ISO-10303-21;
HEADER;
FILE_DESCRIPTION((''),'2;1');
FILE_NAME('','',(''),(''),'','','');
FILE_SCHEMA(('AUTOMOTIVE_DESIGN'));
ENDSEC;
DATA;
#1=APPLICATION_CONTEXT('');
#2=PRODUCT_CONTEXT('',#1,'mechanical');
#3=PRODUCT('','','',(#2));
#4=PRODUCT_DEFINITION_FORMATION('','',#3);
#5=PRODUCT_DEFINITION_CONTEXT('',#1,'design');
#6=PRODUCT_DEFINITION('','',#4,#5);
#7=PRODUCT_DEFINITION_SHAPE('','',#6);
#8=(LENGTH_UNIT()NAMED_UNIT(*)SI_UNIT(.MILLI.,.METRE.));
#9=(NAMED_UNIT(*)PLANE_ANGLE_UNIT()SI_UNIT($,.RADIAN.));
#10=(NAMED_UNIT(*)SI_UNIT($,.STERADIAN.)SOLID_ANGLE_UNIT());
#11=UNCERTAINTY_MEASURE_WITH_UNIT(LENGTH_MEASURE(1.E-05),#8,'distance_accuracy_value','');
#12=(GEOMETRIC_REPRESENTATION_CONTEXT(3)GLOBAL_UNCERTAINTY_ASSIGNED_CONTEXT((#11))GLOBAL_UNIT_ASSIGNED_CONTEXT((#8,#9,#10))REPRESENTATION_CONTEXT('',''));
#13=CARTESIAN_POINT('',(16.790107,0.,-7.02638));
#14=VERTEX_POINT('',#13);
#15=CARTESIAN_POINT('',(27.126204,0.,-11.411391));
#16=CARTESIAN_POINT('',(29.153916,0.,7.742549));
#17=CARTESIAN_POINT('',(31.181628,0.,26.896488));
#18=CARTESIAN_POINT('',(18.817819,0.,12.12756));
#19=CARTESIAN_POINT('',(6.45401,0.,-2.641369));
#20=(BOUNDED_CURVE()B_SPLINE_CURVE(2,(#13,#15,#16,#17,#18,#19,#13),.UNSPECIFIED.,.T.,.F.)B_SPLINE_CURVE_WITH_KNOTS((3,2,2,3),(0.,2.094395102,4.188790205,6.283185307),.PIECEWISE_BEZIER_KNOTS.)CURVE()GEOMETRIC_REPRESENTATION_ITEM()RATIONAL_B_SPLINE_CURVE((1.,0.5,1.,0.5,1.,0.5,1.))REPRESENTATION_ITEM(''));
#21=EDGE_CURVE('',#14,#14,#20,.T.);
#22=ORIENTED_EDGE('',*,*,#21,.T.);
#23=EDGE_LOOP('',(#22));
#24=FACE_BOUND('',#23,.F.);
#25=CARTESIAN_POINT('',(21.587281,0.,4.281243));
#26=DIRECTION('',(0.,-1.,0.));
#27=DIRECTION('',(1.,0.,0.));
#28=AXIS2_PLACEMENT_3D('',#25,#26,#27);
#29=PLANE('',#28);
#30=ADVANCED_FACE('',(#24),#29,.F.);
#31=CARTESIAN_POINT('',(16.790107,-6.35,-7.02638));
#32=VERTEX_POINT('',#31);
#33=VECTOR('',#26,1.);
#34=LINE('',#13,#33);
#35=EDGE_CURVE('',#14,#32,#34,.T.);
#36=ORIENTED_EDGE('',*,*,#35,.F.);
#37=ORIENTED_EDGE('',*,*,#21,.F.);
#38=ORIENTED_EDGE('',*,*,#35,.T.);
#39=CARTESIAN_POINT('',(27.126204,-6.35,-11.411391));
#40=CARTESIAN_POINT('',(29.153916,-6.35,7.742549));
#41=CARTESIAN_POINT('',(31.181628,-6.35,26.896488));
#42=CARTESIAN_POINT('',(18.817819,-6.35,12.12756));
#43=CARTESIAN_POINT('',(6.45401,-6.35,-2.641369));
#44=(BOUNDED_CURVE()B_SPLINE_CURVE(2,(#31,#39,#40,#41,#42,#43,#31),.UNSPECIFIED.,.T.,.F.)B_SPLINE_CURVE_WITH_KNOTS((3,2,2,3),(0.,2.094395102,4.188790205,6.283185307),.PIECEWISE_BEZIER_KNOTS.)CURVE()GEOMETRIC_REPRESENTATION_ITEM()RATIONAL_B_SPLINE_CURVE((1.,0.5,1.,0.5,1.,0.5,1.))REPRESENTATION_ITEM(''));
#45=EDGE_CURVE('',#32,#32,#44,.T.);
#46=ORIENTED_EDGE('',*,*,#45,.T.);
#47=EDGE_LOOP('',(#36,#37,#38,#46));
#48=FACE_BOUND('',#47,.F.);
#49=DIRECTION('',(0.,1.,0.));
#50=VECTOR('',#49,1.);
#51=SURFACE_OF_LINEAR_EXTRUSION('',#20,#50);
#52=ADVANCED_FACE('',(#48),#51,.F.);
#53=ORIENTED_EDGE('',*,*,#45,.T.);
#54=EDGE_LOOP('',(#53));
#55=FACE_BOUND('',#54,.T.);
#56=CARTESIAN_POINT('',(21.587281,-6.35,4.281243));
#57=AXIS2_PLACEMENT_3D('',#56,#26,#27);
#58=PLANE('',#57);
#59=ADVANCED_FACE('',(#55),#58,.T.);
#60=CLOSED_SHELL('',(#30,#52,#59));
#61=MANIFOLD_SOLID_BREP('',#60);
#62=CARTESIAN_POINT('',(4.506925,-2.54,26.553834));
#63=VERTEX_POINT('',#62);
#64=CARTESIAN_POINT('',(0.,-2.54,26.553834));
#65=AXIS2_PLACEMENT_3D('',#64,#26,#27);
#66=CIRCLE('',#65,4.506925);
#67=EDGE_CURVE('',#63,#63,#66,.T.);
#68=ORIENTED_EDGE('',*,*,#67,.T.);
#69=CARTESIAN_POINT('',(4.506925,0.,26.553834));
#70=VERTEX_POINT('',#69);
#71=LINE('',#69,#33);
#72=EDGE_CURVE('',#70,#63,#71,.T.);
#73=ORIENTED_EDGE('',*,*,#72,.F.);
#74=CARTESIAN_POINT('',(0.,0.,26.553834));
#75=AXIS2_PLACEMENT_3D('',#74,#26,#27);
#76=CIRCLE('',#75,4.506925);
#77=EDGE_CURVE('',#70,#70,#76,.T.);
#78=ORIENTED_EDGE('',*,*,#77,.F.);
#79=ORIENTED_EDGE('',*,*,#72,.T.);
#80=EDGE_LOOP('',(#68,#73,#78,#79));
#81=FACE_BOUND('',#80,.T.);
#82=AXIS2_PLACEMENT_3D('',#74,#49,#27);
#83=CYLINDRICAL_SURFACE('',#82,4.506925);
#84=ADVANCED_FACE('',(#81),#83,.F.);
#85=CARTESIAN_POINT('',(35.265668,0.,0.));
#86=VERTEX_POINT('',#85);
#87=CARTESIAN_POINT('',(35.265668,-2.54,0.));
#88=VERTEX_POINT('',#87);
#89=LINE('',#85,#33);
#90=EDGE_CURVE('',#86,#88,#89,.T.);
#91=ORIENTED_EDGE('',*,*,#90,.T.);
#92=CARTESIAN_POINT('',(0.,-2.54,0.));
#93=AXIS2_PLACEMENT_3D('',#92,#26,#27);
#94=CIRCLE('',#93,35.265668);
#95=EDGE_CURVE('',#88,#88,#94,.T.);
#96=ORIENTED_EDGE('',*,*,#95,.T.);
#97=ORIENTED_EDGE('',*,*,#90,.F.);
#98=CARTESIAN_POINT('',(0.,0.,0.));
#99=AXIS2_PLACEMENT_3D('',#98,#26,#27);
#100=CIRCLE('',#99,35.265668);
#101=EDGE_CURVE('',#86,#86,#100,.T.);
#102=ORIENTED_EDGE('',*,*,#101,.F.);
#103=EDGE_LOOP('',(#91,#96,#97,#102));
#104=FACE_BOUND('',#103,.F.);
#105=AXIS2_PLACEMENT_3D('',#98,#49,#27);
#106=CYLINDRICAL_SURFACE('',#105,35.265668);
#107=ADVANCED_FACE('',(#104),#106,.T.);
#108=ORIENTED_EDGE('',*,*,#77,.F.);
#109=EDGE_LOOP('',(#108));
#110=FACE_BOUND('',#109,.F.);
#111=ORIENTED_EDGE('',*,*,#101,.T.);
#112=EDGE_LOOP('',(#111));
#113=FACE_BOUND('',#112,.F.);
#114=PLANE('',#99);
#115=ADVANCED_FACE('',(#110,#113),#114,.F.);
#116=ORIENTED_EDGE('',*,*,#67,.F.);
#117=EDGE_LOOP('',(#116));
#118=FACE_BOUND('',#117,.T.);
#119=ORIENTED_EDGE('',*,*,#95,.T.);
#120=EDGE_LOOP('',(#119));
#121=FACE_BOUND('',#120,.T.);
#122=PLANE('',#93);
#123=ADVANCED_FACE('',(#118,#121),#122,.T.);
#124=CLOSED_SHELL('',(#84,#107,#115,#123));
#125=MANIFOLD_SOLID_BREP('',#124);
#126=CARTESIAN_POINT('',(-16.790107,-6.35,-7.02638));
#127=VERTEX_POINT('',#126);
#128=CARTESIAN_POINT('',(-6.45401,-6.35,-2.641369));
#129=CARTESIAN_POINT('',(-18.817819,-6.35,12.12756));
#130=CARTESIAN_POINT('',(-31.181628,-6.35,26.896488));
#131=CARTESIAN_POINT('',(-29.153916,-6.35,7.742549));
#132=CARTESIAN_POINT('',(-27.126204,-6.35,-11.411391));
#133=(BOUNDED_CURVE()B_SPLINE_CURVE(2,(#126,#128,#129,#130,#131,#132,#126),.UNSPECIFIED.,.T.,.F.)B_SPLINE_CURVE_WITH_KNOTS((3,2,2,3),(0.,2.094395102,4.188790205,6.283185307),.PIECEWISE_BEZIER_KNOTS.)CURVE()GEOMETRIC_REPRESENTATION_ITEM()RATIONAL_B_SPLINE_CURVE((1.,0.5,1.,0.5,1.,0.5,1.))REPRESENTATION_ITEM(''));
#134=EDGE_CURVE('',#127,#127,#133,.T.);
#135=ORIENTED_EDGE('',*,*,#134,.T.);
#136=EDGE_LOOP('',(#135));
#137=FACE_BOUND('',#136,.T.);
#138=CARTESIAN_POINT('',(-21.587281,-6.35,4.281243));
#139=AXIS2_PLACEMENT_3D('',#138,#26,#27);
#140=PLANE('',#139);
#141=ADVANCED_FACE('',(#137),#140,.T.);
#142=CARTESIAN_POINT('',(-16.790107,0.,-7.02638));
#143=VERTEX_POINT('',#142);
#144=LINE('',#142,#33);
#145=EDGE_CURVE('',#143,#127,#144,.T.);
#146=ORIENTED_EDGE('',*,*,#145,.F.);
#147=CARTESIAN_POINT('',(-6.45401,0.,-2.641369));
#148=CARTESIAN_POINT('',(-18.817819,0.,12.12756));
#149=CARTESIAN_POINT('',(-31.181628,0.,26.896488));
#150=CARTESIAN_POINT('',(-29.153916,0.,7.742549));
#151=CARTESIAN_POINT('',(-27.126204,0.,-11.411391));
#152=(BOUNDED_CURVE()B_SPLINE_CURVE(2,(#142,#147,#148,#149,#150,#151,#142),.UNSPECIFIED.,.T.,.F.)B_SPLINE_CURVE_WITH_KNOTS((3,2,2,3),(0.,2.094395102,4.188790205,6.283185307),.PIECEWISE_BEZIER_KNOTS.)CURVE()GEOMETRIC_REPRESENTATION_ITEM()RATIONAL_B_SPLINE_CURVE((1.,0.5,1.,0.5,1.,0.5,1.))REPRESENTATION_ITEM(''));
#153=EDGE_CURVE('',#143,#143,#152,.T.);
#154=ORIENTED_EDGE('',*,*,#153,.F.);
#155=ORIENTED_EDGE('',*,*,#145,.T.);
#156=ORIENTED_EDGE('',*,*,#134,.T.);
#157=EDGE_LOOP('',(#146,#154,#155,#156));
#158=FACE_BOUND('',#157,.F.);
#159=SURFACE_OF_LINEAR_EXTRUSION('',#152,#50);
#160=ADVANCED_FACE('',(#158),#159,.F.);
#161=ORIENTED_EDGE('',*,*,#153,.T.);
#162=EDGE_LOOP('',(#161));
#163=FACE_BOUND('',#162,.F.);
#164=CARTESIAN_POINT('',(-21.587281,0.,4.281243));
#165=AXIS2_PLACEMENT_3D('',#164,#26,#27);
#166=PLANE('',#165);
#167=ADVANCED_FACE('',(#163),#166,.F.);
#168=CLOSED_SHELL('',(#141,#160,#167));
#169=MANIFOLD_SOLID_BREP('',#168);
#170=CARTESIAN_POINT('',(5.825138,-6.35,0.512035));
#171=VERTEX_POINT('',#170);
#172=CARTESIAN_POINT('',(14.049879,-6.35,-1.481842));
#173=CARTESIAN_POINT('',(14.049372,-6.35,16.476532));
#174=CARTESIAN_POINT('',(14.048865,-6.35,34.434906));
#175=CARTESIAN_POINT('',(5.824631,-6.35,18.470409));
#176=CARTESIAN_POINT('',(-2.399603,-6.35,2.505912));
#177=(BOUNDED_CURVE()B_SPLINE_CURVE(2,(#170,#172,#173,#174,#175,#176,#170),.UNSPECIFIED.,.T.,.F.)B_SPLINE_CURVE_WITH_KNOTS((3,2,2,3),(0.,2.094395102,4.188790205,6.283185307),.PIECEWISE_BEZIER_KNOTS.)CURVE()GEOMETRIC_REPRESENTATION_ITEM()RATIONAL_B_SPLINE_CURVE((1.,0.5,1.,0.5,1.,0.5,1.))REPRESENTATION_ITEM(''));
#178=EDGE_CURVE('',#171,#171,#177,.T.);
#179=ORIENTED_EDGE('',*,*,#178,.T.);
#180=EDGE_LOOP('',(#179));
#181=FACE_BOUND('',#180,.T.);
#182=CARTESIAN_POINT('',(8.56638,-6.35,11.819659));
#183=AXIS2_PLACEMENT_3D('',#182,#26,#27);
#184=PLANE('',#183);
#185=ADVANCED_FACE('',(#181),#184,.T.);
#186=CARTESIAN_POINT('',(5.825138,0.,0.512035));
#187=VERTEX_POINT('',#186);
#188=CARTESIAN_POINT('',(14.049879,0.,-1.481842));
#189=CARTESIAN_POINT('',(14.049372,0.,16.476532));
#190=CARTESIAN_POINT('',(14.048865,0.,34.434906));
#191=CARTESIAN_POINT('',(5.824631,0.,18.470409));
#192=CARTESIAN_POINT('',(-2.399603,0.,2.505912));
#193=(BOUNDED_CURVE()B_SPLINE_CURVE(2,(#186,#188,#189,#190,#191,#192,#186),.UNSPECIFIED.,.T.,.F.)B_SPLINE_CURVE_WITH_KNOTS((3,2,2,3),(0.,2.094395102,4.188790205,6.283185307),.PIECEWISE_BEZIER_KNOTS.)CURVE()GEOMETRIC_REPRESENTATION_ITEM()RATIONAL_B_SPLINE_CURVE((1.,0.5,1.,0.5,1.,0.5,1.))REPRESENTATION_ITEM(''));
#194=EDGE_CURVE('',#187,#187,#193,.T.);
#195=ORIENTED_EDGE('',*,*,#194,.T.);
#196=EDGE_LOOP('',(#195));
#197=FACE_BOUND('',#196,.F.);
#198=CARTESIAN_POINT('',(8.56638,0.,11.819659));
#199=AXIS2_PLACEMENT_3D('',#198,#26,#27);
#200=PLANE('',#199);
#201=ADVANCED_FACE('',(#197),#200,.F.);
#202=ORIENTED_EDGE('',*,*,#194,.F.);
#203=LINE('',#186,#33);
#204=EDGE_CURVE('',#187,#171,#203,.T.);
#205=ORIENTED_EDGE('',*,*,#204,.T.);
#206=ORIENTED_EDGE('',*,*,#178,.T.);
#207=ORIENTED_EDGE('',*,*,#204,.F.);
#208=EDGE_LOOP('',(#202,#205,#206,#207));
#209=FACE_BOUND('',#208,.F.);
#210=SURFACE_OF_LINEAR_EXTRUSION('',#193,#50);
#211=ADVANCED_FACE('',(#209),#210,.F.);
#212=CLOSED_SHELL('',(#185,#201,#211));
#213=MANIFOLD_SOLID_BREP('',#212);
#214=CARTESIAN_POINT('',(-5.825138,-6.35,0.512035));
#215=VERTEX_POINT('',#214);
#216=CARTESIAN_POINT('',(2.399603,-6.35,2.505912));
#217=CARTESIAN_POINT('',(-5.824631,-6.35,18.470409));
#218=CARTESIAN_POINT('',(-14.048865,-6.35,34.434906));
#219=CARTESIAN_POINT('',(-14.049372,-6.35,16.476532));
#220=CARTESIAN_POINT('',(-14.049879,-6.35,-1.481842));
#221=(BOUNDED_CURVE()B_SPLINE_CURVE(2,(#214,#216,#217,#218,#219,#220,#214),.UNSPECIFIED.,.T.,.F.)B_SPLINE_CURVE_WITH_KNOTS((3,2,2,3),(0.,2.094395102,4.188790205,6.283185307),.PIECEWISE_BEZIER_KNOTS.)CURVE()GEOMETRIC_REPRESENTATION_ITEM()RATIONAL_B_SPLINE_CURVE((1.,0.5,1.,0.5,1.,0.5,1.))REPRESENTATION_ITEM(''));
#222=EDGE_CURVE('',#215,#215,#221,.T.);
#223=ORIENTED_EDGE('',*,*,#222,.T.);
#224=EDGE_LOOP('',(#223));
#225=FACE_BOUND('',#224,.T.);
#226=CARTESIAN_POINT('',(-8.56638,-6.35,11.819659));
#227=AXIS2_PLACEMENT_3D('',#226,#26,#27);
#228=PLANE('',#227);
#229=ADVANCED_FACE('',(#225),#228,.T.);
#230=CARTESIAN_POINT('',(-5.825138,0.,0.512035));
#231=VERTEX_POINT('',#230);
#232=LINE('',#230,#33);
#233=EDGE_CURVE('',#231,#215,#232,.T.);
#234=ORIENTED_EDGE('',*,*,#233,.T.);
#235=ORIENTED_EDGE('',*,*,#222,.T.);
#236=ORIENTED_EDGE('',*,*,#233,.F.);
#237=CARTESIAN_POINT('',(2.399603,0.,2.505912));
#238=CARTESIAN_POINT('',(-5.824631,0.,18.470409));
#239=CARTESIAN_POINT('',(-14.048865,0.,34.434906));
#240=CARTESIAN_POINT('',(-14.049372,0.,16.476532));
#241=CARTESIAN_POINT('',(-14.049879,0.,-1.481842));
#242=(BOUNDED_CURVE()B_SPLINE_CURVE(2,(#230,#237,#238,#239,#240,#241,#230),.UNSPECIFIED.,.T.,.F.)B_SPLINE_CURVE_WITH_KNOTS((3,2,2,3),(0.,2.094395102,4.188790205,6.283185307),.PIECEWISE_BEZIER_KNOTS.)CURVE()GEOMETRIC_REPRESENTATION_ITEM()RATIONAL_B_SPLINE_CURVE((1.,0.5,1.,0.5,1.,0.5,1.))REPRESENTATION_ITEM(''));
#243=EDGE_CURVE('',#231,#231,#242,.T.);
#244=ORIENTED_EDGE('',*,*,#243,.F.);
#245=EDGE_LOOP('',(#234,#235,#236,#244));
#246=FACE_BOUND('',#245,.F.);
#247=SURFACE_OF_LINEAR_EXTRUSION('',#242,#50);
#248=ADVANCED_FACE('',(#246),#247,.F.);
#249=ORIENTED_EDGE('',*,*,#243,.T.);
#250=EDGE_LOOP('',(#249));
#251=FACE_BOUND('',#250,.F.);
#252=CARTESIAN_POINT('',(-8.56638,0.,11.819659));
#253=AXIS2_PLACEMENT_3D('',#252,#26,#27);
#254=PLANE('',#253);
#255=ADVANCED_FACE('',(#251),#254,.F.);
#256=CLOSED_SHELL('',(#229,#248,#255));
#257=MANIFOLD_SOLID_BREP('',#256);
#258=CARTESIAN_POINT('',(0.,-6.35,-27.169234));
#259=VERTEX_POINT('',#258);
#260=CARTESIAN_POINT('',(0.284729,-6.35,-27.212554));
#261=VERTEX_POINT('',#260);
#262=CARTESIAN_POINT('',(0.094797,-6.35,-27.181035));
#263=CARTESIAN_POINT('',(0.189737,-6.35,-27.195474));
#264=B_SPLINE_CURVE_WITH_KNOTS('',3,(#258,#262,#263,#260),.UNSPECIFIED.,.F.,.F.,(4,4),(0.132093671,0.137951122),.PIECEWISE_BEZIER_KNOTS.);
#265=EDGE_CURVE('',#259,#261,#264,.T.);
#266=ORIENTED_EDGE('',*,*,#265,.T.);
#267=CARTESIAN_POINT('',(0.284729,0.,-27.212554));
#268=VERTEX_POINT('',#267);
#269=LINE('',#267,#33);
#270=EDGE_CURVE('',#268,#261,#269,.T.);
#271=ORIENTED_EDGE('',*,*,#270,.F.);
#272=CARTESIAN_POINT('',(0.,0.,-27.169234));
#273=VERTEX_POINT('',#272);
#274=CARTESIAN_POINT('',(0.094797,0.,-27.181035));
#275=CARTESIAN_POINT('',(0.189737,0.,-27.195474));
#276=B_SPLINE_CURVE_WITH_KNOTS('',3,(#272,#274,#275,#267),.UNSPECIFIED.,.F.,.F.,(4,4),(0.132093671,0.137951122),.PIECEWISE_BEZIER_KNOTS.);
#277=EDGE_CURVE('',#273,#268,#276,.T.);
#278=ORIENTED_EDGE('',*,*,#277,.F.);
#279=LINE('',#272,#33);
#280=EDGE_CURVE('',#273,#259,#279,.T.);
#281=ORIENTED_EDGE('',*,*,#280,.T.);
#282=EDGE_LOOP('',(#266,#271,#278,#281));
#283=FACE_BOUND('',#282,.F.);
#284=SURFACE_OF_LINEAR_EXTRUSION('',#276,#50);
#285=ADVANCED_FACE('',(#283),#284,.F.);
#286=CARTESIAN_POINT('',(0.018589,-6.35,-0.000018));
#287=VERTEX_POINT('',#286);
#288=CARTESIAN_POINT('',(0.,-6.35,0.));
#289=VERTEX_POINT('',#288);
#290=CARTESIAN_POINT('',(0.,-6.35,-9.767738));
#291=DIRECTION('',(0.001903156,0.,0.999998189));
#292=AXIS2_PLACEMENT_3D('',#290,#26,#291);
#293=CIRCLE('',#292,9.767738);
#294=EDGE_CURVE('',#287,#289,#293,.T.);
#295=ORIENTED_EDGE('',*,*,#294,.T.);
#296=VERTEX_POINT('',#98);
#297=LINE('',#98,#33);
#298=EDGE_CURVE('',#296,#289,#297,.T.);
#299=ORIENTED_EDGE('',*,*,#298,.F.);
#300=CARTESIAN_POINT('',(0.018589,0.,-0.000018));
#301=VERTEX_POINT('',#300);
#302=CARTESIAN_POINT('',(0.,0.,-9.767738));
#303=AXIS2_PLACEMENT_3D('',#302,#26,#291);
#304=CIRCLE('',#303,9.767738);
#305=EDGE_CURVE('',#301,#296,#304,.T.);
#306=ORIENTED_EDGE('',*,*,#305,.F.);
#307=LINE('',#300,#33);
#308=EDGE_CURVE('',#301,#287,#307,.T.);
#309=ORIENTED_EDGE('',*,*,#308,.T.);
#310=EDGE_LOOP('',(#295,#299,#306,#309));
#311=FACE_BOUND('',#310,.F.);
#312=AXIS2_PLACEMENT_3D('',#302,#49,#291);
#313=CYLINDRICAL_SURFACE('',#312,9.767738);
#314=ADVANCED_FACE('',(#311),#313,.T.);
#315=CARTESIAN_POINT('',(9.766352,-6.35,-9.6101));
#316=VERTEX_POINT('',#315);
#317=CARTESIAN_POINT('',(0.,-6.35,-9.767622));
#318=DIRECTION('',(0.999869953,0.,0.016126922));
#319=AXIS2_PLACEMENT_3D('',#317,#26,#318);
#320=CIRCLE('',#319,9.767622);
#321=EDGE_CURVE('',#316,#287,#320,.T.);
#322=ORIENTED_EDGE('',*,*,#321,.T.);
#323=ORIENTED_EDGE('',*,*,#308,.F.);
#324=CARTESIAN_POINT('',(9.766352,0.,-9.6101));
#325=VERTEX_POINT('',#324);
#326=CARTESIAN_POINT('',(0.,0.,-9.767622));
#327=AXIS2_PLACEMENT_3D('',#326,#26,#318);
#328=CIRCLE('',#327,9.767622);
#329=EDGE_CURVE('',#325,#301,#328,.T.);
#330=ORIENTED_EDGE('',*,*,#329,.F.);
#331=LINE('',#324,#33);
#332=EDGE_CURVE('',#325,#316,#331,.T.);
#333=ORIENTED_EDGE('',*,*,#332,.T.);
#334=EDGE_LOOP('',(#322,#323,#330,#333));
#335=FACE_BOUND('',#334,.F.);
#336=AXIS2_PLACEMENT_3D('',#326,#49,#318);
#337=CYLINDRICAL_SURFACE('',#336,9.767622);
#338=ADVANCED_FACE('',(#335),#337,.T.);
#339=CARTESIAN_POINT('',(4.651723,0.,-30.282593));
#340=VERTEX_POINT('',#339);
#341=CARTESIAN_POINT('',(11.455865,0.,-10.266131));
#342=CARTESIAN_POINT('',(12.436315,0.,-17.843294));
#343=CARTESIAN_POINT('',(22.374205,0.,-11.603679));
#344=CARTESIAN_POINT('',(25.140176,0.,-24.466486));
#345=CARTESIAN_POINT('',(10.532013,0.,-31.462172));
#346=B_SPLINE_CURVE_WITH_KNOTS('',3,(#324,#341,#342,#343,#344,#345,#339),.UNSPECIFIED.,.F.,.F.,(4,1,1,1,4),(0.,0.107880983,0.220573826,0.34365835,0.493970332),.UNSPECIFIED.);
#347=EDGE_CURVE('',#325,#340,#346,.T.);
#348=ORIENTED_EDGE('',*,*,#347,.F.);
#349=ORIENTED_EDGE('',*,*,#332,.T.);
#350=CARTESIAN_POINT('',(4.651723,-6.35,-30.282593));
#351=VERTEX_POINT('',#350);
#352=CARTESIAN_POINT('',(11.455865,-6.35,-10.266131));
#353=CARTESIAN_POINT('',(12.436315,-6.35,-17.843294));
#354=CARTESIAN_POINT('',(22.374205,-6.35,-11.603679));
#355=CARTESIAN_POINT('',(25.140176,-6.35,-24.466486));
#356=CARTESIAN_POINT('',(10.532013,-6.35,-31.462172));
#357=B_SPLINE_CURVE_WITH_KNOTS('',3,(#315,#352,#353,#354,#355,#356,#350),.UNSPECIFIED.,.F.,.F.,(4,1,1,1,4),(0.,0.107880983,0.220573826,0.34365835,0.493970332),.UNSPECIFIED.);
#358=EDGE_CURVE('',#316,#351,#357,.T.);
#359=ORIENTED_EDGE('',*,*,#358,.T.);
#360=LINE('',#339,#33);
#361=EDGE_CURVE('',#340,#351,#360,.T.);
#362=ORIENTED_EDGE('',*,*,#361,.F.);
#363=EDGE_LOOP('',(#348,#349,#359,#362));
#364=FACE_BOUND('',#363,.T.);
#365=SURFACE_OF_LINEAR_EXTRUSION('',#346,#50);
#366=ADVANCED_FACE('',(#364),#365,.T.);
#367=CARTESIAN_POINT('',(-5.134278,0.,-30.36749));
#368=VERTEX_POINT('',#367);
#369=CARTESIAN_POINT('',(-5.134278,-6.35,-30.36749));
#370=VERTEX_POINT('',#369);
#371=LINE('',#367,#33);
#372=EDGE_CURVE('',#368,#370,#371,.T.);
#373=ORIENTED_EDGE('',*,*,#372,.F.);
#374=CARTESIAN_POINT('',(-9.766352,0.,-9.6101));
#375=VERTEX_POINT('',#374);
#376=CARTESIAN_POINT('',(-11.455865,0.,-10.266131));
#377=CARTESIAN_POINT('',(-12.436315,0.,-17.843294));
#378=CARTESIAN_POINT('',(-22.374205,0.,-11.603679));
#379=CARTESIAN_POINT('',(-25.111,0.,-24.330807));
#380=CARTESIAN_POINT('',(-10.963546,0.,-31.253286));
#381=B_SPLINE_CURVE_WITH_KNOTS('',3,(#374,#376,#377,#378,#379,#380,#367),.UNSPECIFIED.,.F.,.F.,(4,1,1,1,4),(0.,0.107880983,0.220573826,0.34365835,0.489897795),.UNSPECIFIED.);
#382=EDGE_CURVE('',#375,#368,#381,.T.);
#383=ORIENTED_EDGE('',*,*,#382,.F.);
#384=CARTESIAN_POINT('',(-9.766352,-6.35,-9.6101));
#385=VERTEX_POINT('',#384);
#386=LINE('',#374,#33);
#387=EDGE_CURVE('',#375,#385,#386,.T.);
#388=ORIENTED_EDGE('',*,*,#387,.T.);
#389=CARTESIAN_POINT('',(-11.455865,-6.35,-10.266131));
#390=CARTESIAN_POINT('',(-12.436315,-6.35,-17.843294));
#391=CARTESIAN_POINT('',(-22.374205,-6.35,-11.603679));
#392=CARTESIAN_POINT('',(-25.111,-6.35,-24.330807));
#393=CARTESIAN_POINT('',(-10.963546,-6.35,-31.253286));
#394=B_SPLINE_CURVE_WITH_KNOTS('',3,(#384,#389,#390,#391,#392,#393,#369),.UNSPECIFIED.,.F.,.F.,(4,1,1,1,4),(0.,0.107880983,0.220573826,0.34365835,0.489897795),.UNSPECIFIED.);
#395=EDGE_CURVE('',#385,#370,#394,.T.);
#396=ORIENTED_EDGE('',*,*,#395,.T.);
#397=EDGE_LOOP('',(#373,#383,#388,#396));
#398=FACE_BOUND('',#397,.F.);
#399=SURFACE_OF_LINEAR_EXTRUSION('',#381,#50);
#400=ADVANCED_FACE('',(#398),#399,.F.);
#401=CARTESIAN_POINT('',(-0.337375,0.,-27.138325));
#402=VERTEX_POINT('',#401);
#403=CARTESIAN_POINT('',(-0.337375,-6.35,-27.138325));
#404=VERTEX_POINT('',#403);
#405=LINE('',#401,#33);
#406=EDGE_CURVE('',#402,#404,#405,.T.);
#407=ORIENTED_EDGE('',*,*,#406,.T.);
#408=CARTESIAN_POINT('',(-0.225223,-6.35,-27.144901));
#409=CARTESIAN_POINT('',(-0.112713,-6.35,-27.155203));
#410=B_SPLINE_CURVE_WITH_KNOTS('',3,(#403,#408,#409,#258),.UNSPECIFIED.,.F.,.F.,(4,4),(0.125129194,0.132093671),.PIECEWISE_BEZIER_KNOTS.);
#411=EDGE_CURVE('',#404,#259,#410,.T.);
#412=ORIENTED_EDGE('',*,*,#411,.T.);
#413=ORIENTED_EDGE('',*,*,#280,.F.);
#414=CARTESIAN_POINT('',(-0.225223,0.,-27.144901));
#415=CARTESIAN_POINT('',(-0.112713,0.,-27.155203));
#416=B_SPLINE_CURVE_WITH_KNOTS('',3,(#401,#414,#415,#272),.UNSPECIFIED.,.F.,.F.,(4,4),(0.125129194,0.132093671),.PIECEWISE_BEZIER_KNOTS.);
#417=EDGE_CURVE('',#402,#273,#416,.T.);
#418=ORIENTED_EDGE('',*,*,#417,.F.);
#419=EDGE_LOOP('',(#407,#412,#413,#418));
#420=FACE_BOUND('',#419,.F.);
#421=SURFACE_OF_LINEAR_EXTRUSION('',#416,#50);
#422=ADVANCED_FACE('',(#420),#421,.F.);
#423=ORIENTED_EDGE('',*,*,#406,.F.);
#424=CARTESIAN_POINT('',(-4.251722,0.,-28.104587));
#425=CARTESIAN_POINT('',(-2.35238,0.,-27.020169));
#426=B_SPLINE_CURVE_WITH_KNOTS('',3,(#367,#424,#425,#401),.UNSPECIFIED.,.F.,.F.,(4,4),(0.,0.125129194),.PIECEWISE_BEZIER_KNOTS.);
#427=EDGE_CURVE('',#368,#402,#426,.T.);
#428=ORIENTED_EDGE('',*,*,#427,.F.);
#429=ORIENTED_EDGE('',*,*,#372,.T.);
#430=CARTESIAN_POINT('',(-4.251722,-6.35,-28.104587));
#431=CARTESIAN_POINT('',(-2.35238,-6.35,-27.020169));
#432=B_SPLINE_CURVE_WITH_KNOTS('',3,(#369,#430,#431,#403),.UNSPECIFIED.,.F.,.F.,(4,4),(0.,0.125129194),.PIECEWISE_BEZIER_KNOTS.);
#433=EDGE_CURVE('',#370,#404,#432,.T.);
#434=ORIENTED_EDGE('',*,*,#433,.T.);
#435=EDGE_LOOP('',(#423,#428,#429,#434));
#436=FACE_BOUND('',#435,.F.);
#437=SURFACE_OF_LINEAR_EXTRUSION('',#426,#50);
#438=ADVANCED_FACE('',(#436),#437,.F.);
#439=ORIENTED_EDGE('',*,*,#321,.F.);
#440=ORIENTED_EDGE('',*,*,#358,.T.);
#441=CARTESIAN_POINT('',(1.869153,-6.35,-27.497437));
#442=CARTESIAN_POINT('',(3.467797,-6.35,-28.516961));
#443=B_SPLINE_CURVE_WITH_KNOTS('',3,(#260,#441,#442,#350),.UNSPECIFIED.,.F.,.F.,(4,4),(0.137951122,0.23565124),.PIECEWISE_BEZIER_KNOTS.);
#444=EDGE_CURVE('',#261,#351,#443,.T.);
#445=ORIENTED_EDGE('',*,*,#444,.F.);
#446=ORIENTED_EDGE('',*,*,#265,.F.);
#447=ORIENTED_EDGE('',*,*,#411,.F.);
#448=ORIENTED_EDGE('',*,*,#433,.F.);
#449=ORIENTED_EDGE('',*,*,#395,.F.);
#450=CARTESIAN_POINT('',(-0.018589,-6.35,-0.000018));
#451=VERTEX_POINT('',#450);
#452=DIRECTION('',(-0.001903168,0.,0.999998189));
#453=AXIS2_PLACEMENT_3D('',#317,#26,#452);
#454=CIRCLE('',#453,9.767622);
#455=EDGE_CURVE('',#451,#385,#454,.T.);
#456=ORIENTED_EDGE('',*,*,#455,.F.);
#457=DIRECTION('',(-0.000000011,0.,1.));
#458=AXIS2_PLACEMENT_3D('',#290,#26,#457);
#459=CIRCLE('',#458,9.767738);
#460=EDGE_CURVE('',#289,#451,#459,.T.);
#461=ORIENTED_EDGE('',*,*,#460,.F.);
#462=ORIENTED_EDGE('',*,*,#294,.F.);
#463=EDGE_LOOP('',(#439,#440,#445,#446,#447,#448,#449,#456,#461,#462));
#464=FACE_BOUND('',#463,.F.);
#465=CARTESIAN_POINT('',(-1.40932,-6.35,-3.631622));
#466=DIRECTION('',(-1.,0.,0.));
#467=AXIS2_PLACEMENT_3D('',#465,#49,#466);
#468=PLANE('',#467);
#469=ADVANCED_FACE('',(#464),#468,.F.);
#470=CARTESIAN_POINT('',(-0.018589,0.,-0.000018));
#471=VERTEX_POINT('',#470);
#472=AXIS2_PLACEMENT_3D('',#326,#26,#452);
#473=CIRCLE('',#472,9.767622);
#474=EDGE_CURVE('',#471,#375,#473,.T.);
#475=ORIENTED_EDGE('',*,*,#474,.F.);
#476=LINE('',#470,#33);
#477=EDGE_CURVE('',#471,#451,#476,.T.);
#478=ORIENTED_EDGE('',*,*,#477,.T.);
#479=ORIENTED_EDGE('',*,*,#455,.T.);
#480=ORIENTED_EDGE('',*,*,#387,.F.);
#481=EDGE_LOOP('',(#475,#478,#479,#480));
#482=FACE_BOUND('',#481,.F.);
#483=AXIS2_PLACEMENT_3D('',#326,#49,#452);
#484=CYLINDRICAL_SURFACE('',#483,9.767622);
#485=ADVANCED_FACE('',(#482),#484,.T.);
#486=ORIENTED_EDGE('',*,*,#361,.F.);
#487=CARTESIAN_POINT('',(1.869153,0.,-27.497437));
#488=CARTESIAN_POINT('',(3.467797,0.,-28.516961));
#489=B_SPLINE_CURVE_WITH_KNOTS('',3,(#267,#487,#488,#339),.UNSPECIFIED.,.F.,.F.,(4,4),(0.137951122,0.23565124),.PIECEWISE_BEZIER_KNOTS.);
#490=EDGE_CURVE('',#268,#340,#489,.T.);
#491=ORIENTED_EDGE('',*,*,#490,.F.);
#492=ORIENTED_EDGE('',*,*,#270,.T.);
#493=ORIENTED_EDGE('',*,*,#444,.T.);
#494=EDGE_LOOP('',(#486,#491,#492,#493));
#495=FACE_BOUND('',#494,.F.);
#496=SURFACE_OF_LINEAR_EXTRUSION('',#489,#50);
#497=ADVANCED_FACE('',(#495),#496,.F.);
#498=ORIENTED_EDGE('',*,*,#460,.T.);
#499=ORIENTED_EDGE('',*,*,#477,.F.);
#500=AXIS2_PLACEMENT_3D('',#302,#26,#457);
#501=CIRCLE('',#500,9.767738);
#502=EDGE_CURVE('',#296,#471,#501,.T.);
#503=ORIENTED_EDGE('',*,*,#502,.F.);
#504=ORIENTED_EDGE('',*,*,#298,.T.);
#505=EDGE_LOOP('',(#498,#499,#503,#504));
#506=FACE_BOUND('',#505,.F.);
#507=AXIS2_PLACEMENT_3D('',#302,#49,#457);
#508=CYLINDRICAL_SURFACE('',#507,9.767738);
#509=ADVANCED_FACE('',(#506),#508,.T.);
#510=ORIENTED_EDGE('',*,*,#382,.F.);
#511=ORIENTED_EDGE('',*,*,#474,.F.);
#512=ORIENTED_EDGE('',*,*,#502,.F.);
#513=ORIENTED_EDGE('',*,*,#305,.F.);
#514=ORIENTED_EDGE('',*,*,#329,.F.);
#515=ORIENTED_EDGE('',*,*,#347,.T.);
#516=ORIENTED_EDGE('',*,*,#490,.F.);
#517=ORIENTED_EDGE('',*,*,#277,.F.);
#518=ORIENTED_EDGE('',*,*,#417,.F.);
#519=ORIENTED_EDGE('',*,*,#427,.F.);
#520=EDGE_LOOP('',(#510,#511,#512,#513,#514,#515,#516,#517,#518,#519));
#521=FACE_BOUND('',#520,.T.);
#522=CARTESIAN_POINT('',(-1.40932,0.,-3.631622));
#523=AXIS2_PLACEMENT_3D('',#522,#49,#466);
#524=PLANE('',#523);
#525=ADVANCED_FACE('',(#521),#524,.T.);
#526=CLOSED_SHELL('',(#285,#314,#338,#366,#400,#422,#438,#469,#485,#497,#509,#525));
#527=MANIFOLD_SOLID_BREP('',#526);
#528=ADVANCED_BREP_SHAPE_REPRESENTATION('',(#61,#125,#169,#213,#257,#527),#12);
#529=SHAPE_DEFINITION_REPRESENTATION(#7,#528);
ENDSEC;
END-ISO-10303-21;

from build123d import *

# Parameters (mm, degrees)
F1_DEPTH = 6.35
F2_R     = 40.9832511975
F2_R_2   = 35.5935039739
F3_DEPTH = 6.35
F5_R     = 35.2656682334
F6_DEPTH = 2.54
F7_R     = 4.5069254771
F8_DEPTH = 2.54


with BuildPart() as f1:
    # F0 (on Front) → F1 (new body)
    with BuildSketch(Plane.XZ):
        with BuildLine():
            add(Edge.make_bspline(
                [(0, 0), (-0.8542329599, -0.0309298364), (-1.2996616548, -4.4613797175), (-2.3936062671, -7.4517694667)],
                knots=[0.7613049359, 0.7613049359, 0.7613049359, 0.7613049359, 0.8627917453, 0.8627917453, 0.8627917453, 0.8627917453], degree=3))
            ThreePointArc((0, 0), (-0.0092947165, -4.4224e-06), (-0.0185894245, -1.76894e-05))
            add(Edge.make_bspline(
                [(-2.3936062671, -7.4517694667), (-1.7627806242, -3.1928435627), (-0.7469629996, -0.0275428514), (-0.0185894245, -1.76894e-05)],
                knots=[0.6746259926, 0.6746259926, 0.6746259926, 0.6746259926, 0.7605712877, 0.7605712877, 0.7605712877, 0.7605712877], degree=3))
        make_face()
        with BuildLine():
            Line((0, -27.1692338988), (0, 0))
            add(Edge.make_bspline(
                [(0, 0), (-0.8542329599, -0.0309298364), (-1.2996616548, -4.4613797175), (-2.3936062671, -7.4517694667)],
                knots=[0.7613049359, 0.7613049359, 0.7613049359, 0.7613049359, 0.8627917453, 0.8627917453, 0.8627917453, 0.8627917453], degree=3))
            add(Edge.make_bspline(
                [(-0.3373747703, -27.1383245315), (-3.4203099334, -22.7407711946), (-3.342600692, -13.8587647826), (-2.3936062671, -7.4517694667)],
                knots=[0.5453325708, 0.5453325708, 0.5453325708, 0.5453325708, 0.6746259926, 0.6746259926, 0.6746259926, 0.6746259926], degree=3))
            add(Edge.make_bspline(
                [(-0.337374764, -27.1383245227), (-0.225223024, -27.1449008745), (-0.1127129786, -27.1552026154), (0, -27.1692338988)],
                knots=[0.1251291941, 0.1251291941, 0.1251291941, 0.1251291941, 0.1320936712, 0.1320936712, 0.1320936712, 0.1320936712], degree=3))
        make_face()
        with BuildLine():
            add(Edge.make_bspline(
                [(0, 0), (0.8542329599, -0.0309298364), (1.2996616548, -4.4613797175), (2.3936062671, -7.4517694667)],
                knots=[0.7613049359, 0.7613049359, 0.7613049359, 0.7613049359, 0.8627917453, 0.8627917453, 0.8627917453, 0.8627917453], degree=3))
            Line((0, 0), (0, -27.1692338988))
            add(Edge.make_bspline(
                [(0, -27.1692338988), (0.0947968893, -27.1810348647), (0.1897373254, -27.1954739587), (0.2847288735, -27.2125536519)],
                knots=[0.1320936712, 0.1320936712, 0.1320936712, 0.1320936712, 0.1379511223, 0.1379511223, 0.1379511223, 0.1379511223], degree=3))
            add(Edge.make_bspline(
                [(0.284728874, -27.2125536558), (3.4211615885, -22.8413824024), (3.3479713394, -13.8950239132), (2.3936062671, -7.4517694667)],
                knots=[0.5446008601, 0.5446008601, 0.5446008601, 0.5446008601, 0.6746259926, 0.6746259926, 0.6746259926, 0.6746259926], degree=3))
        make_face()
        with BuildLine():
            ThreePointArc((0.0185894245, -1.76894e-05), (0.0092947165, -4.4224e-06), (0, 0))
            add(Edge.make_bspline(
                [(0, 0), (0.8542329599, -0.0309298364), (1.2996616548, -4.4613797175), (2.3936062671, -7.4517694667)],
                knots=[0.7613049359, 0.7613049359, 0.7613049359, 0.7613049359, 0.8627917453, 0.8627917453, 0.8627917453, 0.8627917453], degree=3))
            add(Edge.make_bspline(
                [(2.3936062671, -7.4517694667), (1.7627806242, -3.1928435627), (0.7469629996, -0.0275428514), (0.0185894245, -1.76894e-05)],
                knots=[0.6746259926, 0.6746259926, 0.6746259926, 0.6746259926, 0.7605712877, 0.7605712877, 0.7605712877, 0.7605712877], degree=3))
        make_face()
        with BuildLine():
            add(Edge.make_bspline(
                [(0.2847288735, -27.2125536519), (1.8691527538, -27.497436615), (3.467796537, -28.5169608167), (4.6517230542, -30.2825928689)],
                knots=[0.1379511223, 0.1379511223, 0.1379511223, 0.1379511223, 0.2356512402, 0.2356512402, 0.2356512402, 0.2356512402], degree=3))
            add(Edge.make_bspline(
                [(9.7663515031, -9.6101000815), (11.4558651985, -10.2661306715), (12.43631527, -17.8432939914), (22.3742050925, -11.6036791249), (25.1401756668, -24.4664864351), (10.5320133814, -31.4621716212), (4.6517230542, -30.2825928689)],
                knots=[0, 0, 0, 0, 0.1078809829, 0.2205738258, 0.3436583505, 0.4939703317, 0.4939703317, 0.4939703317, 0.4939703317], degree=3))
            add(Edge.make_bspline(
                [(2.3936062671, -7.4517694667), (2.7640750419, -8.4644770701), (4.5399930942, -11.8480905406), (8.1557945616, -8.9847280448), (9.7663515031, -9.6101000815)],
                knots=[0.8627917453, 0.8627917453, 0.8627917453, 0.8627917453, 0.8971606644, 1, 1, 1, 1], degree=3))
            add(Edge.make_bspline(
                [(0.284728874, -27.2125536558), (3.4211615885, -22.8413824024), (3.3479713394, -13.8950239132), (2.3936062671, -7.4517694667)],
                knots=[0.5446008601, 0.5446008601, 0.5446008601, 0.5446008601, 0.6746259926, 0.6746259926, 0.6746259926, 0.6746259926], degree=3))
        make_face()
        with BuildLine():
            add(Edge.make_bspline(
                [(-9.7663515031, -9.6101000815), (-11.4558651985, -10.2661306715), (-12.43631527, -17.8432939914), (-22.3742050925, -11.6036791249), (-25.1109997325, -24.3308073267), (-10.9635461115, -31.2532862178), (-5.1342780276, -30.3674903339)],
                knots=[0, 0, 0, 0, 0.1078809829, 0.2205738258, 0.3436583505, 0.4898977947, 0.4898977947, 0.4898977947, 0.4898977947], degree=3))
            add(Edge.make_bspline(
                [(-5.1342780276, -30.3674903339), (-4.2517221479, -28.1045870874), (-2.3523798625, -27.0201686872), (-0.337374764, -27.1383245227)],
                knots=[0, 0, 0, 0, 0.1251291941, 0.1251291941, 0.1251291941, 0.1251291941], degree=3))
            add(Edge.make_bspline(
                [(-0.3373747703, -27.1383245315), (-3.4203099334, -22.7407711946), (-3.342600692, -13.8587647826), (-2.3936062671, -7.4517694667)],
                knots=[0.5453325708, 0.5453325708, 0.5453325708, 0.5453325708, 0.6746259926, 0.6746259926, 0.6746259926, 0.6746259926], degree=3))
            add(Edge.make_bspline(
                [(-2.3936062671, -7.4517694667), (-2.7640750419, -8.4644770701), (-4.5399930942, -11.8480905406), (-8.1557945616, -8.9847280448), (-9.7663515031, -9.6101000815)],
                knots=[0.8627917453, 0.8627917453, 0.8627917453, 0.8627917453, 0.8971606644, 1, 1, 1, 1], degree=3))
        make_face()
        with BuildLine():
            add(Edge.make_bspline(
                [(-2.3936062671, -7.4517694667), (-1.7627806242, -3.1928435627), (-0.7469629996, -0.0275428514), (-0.0185894245, -1.76894e-05)],
                knots=[0.6746259926, 0.6746259926, 0.6746259926, 0.6746259926, 0.7605712877, 0.7605712877, 0.7605712877, 0.7605712877], degree=3))
            ThreePointArc((-0.0185894245, -1.76894e-05), (-6.8574549313, -2.811922896), (-9.7663515031, -9.6101000815))
            add(Edge.make_bspline(
                [(-2.3936062671, -7.4517694667), (-2.7640750419, -8.4644770701), (-4.5399930942, -11.8480905406), (-8.1557945616, -8.9847280448), (-9.7663515031, -9.6101000815)],
                knots=[0.8627917453, 0.8627917453, 0.8627917453, 0.8627917453, 0.8971606644, 1, 1, 1, 1], degree=3))
        make_face()
        with BuildLine():
            ThreePointArc((9.7663515031, -9.6101000815), (6.8574549313, -2.811922896), (0.0185894245, -1.76894e-05))
            add(Edge.make_bspline(
                [(2.3936062671, -7.4517694667), (1.7627806242, -3.1928435627), (0.7469629996, -0.0275428514), (0.0185894245, -1.76894e-05)],
                knots=[0.6746259926, 0.6746259926, 0.6746259926, 0.6746259926, 0.7605712877, 0.7605712877, 0.7605712877, 0.7605712877], degree=3))
            add(Edge.make_bspline(
                [(2.3936062671, -7.4517694667), (2.7640750419, -8.4644770701), (4.5399930942, -11.8480905406), (8.1557945616, -8.9847280448), (9.7663515031, -9.6101000815)],
                knots=[0.8627917453, 0.8627917453, 0.8627917453, 0.8627917453, 0.8971606644, 1, 1, 1, 1], degree=3))
        make_face()
    extrude(amount=F1_DEPTH)


with BuildPart() as f1b:
    # F0 (on Front) → F1, piece 2 (new body)
    with BuildSketch(Plane.XZ):
        with BuildLine():
            add(Edge.make_bspline(
                [(-16.7901068926, -7.026379928), (-6.4540098393, -2.6413687215), (-18.8178188619, 12.1275598328), (-31.1816278845, 26.8964883871), (-29.1539159152, 7.7425486263), (-27.1262039459, -11.4113911344), (-16.7901068926, -7.026379928)],
                knots=[0, 0, 0, 2.0943951024, 2.0943951024, 4.1887902048, 4.1887902048, 6.2831853072, 6.2831853072, 6.2831853072], degree=2, weights=[1, 0.5, 1, 0.5, 1, 0.5, 1]))
        make_face()
    extrude(amount=F1_DEPTH)


with BuildPart() as f1c:
    # F0 (on Front) → F1, piece 3 (new body)
    with BuildSketch(Plane.XZ):
        with BuildLine():
            add(Edge.make_bspline(
                [(-5.8251381852, 0.5120352725), (2.3996030872, 2.5059121089), (-5.8246309889, 18.4704089833), (-14.048865065, 34.4349058578), (-14.0493722613, 16.476532147), (-14.0498794576, -1.4818415638), (-5.8251381852, 0.5120352725)],
                knots=[0, 0, 0, 2.0943951024, 2.0943951024, 4.1887902048, 4.1887902048, 6.2831853072, 6.2831853072, 6.2831853072], degree=2, weights=[1, 0.5, 1, 0.5, 1, 0.5, 1]))
        make_face()
    extrude(amount=F1_DEPTH)


with BuildPart() as f1d:
    # F0 (on Front) → F1, piece 4 (new body)
    with BuildSketch(Plane.XZ):
        with BuildLine():
            add(Edge.make_bspline(
                [(5.8251381852, 0.5120352725), (14.0498794576, -1.4818415638), (14.0493722613, 16.476532147), (14.048865065, 34.4349058578), (5.8246309889, 18.4704089833), (-2.3996030872, 2.5059121089), (5.8251381852, 0.5120352725)],
                knots=[0, 0, 0, 2.0943951024, 2.0943951024, 4.1887902048, 4.1887902048, 6.2831853072, 6.2831853072, 6.2831853072], degree=2, weights=[1, 0.5, 1, 0.5, 1, 0.5, 1]))
        make_face()
    extrude(amount=F1_DEPTH)


with BuildPart() as f1e:
    # F0 (on Front) → F1, piece 5 (new body)
    with BuildSketch(Plane.XZ):
        with BuildLine():
            add(Edge.make_bspline(
                [(16.7901068926, -7.026379928), (27.1262039459, -11.4113911344), (29.1539159152, 7.7425486263), (31.1816278845, 26.8964883871), (18.8178188619, 12.1275598328), (6.4540098393, -2.6413687215), (16.7901068926, -7.026379928)],
                knots=[0, 0, 0, 2.0943951024, 2.0943951024, 4.1887902048, 4.1887902048, 6.2831853072, 6.2831853072, 6.2831853072], degree=2, weights=[1, 0.5, 1, 0.5, 1, 0.5, 1]))
        make_face()
    extrude(amount=F1_DEPTH)


with BuildPart() as f3:
    # F2 (on Front) → F3 (new body)
    with BuildSketch(Plane.XZ):
        Circle(F2_R)
        Circle(F2_R_2, mode=Mode.SUBTRACT)
    extrude(amount=F3_DEPTH)


with BuildPart() as f6:
    # F5 (on Front) → F6 (new body)
    with BuildSketch(Plane.XZ):
        Circle(F5_R)
    extrude(amount=F6_DEPTH)

    # F7 (on Front) → F8 (cut)
    with BuildSketch(Plane.XZ):
        with Locations((0, 26.5538338572)):
            Circle(F7_R)
    extrude(amount=F8_DEPTH, mode=Mode.SUBTRACT)


solid = Compound([f1.part, f1b.part, f1c.part, f1d.part, f1e.part, f6.part])
